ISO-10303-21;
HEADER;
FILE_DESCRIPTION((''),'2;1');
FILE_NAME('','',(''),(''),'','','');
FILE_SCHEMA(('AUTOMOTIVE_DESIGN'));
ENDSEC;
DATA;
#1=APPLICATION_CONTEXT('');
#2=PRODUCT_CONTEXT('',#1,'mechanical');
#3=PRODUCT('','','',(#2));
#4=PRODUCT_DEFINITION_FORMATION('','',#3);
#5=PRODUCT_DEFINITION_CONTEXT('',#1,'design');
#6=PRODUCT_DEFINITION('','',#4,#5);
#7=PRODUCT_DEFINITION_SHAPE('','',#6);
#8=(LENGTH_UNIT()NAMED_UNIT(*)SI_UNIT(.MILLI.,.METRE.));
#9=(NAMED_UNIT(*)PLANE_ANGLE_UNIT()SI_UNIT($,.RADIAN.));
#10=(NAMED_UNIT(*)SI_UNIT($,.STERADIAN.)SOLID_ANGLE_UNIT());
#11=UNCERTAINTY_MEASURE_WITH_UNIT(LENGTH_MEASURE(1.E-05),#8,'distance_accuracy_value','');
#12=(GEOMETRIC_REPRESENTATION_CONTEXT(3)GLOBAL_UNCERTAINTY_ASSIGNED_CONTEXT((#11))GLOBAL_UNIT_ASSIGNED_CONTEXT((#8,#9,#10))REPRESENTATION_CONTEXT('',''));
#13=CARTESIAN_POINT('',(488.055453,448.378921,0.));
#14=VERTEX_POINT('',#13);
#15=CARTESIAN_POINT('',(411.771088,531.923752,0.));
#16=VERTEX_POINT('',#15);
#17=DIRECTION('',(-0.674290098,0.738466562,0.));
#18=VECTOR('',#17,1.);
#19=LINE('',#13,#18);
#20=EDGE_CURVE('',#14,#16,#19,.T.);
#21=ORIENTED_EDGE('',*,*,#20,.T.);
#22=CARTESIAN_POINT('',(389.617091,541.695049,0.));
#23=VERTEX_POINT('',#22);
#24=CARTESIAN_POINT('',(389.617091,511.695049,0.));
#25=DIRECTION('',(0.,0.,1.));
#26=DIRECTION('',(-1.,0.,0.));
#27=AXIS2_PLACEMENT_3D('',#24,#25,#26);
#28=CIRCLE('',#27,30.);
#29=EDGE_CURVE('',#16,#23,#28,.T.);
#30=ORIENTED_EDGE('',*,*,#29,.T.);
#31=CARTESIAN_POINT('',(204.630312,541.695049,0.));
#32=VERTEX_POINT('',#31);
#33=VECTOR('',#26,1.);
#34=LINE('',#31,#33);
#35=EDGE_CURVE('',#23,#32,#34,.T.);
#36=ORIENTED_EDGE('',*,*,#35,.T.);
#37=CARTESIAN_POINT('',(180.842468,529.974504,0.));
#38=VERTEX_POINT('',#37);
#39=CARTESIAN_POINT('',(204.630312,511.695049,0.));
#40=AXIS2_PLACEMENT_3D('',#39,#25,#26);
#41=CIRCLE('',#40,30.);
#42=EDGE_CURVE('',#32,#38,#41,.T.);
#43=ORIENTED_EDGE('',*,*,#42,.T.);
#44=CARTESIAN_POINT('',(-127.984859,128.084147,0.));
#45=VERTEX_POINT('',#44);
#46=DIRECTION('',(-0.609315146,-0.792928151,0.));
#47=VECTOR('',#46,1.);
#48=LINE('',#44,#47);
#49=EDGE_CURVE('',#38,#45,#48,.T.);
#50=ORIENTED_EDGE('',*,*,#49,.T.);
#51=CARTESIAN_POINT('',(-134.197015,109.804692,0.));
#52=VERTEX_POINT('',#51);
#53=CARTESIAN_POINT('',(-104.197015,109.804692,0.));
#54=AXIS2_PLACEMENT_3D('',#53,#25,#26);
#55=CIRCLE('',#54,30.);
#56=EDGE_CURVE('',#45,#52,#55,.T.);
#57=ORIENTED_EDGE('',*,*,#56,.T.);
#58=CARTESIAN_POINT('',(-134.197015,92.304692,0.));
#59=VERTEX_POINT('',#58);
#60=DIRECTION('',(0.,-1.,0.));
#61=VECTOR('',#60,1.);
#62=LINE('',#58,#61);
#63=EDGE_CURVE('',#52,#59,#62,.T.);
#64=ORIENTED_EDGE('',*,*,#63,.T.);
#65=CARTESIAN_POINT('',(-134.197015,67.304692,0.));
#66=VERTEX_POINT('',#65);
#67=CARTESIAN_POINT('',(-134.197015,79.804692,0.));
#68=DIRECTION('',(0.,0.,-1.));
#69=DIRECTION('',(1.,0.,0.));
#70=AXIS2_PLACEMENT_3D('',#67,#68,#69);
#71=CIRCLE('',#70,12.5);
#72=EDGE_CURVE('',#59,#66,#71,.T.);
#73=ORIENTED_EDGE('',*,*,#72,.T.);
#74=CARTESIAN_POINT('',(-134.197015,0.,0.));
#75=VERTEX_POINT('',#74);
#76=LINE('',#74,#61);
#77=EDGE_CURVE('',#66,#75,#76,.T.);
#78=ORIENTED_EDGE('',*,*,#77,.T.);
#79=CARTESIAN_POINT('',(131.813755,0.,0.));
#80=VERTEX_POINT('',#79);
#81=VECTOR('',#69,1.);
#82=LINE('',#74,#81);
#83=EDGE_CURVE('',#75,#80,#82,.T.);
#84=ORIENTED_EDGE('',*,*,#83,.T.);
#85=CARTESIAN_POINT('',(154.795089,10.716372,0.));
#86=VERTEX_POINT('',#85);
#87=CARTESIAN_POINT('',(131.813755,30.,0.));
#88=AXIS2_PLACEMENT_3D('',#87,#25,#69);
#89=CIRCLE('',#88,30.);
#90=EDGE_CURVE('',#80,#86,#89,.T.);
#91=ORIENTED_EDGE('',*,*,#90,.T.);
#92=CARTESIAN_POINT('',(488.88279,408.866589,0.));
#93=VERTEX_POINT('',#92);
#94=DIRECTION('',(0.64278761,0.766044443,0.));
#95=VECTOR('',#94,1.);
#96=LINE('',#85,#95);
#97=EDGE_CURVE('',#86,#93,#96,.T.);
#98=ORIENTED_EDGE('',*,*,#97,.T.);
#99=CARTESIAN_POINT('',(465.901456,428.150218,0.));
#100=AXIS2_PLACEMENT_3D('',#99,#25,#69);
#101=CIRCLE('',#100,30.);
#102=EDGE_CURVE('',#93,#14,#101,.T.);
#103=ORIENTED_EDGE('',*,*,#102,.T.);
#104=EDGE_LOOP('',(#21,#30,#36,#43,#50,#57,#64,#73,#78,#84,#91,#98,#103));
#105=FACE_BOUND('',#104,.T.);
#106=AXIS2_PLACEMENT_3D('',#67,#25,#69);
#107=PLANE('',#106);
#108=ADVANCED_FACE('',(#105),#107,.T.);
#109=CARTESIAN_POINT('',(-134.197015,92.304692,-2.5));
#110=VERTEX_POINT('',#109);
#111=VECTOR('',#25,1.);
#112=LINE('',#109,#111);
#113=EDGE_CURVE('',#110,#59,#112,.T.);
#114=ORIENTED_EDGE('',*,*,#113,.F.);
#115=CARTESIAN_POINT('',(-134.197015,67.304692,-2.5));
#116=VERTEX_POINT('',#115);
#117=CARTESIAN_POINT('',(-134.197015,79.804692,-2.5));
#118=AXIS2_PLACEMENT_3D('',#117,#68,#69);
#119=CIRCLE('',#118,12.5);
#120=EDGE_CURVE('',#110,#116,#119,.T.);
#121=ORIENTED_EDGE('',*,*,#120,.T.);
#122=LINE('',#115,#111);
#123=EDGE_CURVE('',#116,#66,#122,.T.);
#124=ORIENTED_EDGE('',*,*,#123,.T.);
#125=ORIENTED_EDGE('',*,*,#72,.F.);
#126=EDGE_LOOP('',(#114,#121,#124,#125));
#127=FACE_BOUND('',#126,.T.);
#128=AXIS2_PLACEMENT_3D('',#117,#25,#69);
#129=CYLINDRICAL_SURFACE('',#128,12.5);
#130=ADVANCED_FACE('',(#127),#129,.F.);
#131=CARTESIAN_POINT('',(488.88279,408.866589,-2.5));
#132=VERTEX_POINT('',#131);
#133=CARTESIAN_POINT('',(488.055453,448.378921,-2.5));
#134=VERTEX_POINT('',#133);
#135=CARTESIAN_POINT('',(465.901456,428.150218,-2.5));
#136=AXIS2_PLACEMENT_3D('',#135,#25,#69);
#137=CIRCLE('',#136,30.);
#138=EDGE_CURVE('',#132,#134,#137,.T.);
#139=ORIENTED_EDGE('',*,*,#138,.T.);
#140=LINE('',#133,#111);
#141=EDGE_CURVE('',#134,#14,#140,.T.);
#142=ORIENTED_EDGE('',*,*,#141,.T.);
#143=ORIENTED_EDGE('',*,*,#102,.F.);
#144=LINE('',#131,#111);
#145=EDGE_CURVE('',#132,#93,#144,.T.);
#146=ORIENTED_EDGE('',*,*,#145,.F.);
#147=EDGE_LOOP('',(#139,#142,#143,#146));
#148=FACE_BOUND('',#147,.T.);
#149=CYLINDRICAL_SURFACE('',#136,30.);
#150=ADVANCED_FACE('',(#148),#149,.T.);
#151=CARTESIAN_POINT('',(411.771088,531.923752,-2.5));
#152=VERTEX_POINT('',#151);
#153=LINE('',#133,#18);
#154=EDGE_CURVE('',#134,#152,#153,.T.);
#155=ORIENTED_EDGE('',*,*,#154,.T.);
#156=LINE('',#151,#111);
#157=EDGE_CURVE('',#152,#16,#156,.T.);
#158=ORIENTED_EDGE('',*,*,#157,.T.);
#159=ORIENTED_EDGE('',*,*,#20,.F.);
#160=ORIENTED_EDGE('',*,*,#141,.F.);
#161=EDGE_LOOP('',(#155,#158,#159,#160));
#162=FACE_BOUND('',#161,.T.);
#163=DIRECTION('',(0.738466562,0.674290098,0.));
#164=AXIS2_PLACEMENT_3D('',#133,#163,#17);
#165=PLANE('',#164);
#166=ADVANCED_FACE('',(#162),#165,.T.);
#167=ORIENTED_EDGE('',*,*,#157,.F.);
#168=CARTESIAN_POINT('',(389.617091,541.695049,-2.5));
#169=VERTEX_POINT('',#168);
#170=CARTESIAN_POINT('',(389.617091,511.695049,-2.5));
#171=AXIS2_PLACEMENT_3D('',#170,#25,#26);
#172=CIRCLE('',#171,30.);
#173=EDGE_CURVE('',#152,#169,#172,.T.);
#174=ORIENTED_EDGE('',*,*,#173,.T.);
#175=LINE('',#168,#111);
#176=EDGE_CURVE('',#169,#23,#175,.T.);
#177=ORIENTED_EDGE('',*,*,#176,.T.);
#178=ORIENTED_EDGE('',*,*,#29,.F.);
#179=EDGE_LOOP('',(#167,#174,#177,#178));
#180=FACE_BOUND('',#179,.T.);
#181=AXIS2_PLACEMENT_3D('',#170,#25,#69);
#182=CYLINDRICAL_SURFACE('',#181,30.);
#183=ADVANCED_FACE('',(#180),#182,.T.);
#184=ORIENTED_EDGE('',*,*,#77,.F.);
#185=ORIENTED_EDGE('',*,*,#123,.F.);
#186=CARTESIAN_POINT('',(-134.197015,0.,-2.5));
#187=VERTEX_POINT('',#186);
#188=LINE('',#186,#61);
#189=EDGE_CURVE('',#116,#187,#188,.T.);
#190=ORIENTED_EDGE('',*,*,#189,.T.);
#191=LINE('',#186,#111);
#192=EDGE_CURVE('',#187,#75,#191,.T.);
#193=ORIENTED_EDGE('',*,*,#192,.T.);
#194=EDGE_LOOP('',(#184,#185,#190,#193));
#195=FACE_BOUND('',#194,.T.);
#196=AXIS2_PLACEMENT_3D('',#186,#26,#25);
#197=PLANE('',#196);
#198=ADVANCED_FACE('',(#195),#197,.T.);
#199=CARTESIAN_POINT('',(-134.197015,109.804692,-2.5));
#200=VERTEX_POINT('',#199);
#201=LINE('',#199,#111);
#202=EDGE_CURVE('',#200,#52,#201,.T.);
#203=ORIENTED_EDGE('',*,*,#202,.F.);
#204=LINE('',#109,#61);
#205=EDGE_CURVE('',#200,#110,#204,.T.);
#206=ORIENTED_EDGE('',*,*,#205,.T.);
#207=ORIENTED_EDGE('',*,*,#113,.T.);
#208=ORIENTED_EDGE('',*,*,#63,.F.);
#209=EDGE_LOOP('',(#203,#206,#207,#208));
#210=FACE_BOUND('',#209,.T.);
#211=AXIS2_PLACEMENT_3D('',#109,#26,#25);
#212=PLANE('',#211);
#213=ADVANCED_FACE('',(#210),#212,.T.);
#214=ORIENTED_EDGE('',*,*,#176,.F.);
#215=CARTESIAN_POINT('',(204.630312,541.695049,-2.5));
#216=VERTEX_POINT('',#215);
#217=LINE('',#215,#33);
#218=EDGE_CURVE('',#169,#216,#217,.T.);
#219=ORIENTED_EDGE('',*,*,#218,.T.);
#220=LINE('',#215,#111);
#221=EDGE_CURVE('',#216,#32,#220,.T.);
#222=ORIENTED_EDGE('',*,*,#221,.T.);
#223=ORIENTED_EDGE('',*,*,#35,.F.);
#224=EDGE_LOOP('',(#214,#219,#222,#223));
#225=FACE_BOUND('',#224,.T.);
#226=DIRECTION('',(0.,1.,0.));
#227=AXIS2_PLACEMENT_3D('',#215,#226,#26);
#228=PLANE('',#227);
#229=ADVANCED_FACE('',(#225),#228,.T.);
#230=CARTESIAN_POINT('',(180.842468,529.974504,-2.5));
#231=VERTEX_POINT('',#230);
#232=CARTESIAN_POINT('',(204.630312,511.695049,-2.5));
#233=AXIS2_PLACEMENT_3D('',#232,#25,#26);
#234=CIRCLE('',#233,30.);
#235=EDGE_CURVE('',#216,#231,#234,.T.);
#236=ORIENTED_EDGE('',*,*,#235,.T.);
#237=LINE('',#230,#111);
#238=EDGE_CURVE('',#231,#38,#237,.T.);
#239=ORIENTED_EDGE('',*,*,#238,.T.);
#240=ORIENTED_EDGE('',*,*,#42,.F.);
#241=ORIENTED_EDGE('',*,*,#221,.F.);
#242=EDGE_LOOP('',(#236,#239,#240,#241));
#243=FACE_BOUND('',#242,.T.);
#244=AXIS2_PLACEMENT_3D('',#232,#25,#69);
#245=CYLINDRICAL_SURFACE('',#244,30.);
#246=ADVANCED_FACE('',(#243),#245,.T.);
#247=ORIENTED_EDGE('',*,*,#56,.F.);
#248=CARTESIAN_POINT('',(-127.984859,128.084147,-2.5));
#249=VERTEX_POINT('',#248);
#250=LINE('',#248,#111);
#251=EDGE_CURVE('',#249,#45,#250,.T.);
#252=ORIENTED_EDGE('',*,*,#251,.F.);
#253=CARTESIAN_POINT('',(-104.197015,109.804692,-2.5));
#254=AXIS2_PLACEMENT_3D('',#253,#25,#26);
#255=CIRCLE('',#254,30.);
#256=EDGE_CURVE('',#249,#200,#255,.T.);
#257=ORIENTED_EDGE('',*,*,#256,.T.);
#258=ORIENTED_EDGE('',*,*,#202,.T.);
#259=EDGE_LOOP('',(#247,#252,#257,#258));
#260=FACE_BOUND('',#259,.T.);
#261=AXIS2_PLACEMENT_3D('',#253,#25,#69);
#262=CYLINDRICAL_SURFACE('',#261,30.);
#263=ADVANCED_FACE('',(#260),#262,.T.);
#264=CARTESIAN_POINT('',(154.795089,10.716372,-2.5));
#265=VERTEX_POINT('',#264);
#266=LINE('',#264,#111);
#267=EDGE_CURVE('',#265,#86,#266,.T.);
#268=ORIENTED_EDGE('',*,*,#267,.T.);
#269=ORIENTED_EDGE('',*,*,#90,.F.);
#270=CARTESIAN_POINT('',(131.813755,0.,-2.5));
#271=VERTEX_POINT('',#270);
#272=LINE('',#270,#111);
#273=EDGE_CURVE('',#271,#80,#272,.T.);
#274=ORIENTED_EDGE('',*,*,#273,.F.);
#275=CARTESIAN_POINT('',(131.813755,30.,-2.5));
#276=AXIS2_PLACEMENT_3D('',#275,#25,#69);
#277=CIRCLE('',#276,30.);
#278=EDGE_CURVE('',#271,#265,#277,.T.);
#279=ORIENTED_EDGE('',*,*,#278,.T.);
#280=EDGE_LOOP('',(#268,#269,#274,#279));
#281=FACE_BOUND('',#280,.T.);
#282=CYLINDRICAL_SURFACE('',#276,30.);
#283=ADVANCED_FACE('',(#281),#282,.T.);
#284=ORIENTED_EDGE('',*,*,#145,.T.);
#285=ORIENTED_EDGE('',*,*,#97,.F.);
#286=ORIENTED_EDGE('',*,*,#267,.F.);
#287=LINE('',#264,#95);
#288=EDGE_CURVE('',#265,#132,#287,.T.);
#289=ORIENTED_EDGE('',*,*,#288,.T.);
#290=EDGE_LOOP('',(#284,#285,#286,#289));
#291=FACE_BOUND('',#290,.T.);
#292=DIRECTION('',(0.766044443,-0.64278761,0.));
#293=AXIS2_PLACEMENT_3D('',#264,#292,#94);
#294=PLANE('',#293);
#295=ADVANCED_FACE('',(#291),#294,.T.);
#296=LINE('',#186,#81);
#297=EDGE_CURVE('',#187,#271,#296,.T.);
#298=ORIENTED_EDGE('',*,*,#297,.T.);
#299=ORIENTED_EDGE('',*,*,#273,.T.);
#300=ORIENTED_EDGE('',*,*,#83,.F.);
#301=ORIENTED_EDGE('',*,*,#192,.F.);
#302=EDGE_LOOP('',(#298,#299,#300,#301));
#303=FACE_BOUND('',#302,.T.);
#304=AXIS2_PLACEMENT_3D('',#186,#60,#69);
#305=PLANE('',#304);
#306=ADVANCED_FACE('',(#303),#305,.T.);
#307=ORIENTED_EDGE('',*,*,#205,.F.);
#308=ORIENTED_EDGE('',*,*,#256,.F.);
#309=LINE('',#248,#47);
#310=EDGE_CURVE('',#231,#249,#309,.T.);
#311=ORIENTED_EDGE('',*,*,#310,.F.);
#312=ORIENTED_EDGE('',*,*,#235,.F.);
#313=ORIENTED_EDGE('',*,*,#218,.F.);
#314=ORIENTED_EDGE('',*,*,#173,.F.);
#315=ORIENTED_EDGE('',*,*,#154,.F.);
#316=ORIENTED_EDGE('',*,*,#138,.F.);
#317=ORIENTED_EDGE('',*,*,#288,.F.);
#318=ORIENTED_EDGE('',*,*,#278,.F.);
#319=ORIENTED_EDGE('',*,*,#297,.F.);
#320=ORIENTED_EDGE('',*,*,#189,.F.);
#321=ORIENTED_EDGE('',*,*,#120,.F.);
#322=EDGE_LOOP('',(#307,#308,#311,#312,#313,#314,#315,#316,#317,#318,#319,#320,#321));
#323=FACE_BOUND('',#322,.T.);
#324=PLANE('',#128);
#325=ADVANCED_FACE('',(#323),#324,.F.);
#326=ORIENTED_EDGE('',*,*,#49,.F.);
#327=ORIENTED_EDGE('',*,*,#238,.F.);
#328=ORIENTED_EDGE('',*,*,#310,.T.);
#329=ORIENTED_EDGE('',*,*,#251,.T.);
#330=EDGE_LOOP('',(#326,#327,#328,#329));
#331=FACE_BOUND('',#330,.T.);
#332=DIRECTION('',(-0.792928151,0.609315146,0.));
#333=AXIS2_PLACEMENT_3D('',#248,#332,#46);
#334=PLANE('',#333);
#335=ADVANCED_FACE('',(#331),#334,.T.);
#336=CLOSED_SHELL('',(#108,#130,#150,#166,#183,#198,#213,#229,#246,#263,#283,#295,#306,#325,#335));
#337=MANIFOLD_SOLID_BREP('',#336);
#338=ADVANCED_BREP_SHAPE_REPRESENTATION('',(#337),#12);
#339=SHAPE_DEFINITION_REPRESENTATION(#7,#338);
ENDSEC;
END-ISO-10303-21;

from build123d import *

# Parameters (mm, degrees)
BASE_FLANGE1_DEPTH = 2.5


# Sheet-metal steps are written as plain solids
with BuildPart() as part:
    # Sketch1 → Base-Flange1 (new body)
    with BuildSketch(Plane.XY):
        with BuildLine():
            Line((-134.197014838, 0), (131.813755418, 0))
            ThreePointArc((131.813755418, 0), (144.49230327, 2.810766389), (154.795088711, 10.716371709))
            Line((154.795088711, 10.716371709), (488.882789575, 408.866589455))
            ThreePointArc((488.882789575, 408.866589455), (495.894882012, 428.778240774), (488.055453139, 448.3789207))
            Line((488.055453139, 448.3789207), (411.771088084, 531.923752399))
            ThreePointArc((411.771088084, 531.923752399), (401.723678511, 539.143738745), (389.617091226, 541.695049445))
            Line((389.617091226, 541.695049445), (204.630312304, 541.695049445))
            ThreePointArc((204.630312304, 541.695049445), (191.371044435, 538.605861688), (180.842467764, 529.974503817))
            Line((180.842467764, 529.974503817), (-127.984859378, 128.084146569))
            ThreePointArc((-127.984859378, 128.084146569), (-132.601550886, 119.457791797), (-134.197014838, 109.804692197))
            Line((-134.197014838, 109.804692197), (-134.197014838, 92.304692197))
            ThreePointArc((-134.197014838, 92.304692197), (-121.697014838, 79.804692197), (-134.197014838, 67.304692197))
            Line((-134.197014838, 67.304692197), (-134.197014838, 0))
        make_face()
    extrude(amount=-BASE_FLANGE1_DEPTH)


solid = part.part
